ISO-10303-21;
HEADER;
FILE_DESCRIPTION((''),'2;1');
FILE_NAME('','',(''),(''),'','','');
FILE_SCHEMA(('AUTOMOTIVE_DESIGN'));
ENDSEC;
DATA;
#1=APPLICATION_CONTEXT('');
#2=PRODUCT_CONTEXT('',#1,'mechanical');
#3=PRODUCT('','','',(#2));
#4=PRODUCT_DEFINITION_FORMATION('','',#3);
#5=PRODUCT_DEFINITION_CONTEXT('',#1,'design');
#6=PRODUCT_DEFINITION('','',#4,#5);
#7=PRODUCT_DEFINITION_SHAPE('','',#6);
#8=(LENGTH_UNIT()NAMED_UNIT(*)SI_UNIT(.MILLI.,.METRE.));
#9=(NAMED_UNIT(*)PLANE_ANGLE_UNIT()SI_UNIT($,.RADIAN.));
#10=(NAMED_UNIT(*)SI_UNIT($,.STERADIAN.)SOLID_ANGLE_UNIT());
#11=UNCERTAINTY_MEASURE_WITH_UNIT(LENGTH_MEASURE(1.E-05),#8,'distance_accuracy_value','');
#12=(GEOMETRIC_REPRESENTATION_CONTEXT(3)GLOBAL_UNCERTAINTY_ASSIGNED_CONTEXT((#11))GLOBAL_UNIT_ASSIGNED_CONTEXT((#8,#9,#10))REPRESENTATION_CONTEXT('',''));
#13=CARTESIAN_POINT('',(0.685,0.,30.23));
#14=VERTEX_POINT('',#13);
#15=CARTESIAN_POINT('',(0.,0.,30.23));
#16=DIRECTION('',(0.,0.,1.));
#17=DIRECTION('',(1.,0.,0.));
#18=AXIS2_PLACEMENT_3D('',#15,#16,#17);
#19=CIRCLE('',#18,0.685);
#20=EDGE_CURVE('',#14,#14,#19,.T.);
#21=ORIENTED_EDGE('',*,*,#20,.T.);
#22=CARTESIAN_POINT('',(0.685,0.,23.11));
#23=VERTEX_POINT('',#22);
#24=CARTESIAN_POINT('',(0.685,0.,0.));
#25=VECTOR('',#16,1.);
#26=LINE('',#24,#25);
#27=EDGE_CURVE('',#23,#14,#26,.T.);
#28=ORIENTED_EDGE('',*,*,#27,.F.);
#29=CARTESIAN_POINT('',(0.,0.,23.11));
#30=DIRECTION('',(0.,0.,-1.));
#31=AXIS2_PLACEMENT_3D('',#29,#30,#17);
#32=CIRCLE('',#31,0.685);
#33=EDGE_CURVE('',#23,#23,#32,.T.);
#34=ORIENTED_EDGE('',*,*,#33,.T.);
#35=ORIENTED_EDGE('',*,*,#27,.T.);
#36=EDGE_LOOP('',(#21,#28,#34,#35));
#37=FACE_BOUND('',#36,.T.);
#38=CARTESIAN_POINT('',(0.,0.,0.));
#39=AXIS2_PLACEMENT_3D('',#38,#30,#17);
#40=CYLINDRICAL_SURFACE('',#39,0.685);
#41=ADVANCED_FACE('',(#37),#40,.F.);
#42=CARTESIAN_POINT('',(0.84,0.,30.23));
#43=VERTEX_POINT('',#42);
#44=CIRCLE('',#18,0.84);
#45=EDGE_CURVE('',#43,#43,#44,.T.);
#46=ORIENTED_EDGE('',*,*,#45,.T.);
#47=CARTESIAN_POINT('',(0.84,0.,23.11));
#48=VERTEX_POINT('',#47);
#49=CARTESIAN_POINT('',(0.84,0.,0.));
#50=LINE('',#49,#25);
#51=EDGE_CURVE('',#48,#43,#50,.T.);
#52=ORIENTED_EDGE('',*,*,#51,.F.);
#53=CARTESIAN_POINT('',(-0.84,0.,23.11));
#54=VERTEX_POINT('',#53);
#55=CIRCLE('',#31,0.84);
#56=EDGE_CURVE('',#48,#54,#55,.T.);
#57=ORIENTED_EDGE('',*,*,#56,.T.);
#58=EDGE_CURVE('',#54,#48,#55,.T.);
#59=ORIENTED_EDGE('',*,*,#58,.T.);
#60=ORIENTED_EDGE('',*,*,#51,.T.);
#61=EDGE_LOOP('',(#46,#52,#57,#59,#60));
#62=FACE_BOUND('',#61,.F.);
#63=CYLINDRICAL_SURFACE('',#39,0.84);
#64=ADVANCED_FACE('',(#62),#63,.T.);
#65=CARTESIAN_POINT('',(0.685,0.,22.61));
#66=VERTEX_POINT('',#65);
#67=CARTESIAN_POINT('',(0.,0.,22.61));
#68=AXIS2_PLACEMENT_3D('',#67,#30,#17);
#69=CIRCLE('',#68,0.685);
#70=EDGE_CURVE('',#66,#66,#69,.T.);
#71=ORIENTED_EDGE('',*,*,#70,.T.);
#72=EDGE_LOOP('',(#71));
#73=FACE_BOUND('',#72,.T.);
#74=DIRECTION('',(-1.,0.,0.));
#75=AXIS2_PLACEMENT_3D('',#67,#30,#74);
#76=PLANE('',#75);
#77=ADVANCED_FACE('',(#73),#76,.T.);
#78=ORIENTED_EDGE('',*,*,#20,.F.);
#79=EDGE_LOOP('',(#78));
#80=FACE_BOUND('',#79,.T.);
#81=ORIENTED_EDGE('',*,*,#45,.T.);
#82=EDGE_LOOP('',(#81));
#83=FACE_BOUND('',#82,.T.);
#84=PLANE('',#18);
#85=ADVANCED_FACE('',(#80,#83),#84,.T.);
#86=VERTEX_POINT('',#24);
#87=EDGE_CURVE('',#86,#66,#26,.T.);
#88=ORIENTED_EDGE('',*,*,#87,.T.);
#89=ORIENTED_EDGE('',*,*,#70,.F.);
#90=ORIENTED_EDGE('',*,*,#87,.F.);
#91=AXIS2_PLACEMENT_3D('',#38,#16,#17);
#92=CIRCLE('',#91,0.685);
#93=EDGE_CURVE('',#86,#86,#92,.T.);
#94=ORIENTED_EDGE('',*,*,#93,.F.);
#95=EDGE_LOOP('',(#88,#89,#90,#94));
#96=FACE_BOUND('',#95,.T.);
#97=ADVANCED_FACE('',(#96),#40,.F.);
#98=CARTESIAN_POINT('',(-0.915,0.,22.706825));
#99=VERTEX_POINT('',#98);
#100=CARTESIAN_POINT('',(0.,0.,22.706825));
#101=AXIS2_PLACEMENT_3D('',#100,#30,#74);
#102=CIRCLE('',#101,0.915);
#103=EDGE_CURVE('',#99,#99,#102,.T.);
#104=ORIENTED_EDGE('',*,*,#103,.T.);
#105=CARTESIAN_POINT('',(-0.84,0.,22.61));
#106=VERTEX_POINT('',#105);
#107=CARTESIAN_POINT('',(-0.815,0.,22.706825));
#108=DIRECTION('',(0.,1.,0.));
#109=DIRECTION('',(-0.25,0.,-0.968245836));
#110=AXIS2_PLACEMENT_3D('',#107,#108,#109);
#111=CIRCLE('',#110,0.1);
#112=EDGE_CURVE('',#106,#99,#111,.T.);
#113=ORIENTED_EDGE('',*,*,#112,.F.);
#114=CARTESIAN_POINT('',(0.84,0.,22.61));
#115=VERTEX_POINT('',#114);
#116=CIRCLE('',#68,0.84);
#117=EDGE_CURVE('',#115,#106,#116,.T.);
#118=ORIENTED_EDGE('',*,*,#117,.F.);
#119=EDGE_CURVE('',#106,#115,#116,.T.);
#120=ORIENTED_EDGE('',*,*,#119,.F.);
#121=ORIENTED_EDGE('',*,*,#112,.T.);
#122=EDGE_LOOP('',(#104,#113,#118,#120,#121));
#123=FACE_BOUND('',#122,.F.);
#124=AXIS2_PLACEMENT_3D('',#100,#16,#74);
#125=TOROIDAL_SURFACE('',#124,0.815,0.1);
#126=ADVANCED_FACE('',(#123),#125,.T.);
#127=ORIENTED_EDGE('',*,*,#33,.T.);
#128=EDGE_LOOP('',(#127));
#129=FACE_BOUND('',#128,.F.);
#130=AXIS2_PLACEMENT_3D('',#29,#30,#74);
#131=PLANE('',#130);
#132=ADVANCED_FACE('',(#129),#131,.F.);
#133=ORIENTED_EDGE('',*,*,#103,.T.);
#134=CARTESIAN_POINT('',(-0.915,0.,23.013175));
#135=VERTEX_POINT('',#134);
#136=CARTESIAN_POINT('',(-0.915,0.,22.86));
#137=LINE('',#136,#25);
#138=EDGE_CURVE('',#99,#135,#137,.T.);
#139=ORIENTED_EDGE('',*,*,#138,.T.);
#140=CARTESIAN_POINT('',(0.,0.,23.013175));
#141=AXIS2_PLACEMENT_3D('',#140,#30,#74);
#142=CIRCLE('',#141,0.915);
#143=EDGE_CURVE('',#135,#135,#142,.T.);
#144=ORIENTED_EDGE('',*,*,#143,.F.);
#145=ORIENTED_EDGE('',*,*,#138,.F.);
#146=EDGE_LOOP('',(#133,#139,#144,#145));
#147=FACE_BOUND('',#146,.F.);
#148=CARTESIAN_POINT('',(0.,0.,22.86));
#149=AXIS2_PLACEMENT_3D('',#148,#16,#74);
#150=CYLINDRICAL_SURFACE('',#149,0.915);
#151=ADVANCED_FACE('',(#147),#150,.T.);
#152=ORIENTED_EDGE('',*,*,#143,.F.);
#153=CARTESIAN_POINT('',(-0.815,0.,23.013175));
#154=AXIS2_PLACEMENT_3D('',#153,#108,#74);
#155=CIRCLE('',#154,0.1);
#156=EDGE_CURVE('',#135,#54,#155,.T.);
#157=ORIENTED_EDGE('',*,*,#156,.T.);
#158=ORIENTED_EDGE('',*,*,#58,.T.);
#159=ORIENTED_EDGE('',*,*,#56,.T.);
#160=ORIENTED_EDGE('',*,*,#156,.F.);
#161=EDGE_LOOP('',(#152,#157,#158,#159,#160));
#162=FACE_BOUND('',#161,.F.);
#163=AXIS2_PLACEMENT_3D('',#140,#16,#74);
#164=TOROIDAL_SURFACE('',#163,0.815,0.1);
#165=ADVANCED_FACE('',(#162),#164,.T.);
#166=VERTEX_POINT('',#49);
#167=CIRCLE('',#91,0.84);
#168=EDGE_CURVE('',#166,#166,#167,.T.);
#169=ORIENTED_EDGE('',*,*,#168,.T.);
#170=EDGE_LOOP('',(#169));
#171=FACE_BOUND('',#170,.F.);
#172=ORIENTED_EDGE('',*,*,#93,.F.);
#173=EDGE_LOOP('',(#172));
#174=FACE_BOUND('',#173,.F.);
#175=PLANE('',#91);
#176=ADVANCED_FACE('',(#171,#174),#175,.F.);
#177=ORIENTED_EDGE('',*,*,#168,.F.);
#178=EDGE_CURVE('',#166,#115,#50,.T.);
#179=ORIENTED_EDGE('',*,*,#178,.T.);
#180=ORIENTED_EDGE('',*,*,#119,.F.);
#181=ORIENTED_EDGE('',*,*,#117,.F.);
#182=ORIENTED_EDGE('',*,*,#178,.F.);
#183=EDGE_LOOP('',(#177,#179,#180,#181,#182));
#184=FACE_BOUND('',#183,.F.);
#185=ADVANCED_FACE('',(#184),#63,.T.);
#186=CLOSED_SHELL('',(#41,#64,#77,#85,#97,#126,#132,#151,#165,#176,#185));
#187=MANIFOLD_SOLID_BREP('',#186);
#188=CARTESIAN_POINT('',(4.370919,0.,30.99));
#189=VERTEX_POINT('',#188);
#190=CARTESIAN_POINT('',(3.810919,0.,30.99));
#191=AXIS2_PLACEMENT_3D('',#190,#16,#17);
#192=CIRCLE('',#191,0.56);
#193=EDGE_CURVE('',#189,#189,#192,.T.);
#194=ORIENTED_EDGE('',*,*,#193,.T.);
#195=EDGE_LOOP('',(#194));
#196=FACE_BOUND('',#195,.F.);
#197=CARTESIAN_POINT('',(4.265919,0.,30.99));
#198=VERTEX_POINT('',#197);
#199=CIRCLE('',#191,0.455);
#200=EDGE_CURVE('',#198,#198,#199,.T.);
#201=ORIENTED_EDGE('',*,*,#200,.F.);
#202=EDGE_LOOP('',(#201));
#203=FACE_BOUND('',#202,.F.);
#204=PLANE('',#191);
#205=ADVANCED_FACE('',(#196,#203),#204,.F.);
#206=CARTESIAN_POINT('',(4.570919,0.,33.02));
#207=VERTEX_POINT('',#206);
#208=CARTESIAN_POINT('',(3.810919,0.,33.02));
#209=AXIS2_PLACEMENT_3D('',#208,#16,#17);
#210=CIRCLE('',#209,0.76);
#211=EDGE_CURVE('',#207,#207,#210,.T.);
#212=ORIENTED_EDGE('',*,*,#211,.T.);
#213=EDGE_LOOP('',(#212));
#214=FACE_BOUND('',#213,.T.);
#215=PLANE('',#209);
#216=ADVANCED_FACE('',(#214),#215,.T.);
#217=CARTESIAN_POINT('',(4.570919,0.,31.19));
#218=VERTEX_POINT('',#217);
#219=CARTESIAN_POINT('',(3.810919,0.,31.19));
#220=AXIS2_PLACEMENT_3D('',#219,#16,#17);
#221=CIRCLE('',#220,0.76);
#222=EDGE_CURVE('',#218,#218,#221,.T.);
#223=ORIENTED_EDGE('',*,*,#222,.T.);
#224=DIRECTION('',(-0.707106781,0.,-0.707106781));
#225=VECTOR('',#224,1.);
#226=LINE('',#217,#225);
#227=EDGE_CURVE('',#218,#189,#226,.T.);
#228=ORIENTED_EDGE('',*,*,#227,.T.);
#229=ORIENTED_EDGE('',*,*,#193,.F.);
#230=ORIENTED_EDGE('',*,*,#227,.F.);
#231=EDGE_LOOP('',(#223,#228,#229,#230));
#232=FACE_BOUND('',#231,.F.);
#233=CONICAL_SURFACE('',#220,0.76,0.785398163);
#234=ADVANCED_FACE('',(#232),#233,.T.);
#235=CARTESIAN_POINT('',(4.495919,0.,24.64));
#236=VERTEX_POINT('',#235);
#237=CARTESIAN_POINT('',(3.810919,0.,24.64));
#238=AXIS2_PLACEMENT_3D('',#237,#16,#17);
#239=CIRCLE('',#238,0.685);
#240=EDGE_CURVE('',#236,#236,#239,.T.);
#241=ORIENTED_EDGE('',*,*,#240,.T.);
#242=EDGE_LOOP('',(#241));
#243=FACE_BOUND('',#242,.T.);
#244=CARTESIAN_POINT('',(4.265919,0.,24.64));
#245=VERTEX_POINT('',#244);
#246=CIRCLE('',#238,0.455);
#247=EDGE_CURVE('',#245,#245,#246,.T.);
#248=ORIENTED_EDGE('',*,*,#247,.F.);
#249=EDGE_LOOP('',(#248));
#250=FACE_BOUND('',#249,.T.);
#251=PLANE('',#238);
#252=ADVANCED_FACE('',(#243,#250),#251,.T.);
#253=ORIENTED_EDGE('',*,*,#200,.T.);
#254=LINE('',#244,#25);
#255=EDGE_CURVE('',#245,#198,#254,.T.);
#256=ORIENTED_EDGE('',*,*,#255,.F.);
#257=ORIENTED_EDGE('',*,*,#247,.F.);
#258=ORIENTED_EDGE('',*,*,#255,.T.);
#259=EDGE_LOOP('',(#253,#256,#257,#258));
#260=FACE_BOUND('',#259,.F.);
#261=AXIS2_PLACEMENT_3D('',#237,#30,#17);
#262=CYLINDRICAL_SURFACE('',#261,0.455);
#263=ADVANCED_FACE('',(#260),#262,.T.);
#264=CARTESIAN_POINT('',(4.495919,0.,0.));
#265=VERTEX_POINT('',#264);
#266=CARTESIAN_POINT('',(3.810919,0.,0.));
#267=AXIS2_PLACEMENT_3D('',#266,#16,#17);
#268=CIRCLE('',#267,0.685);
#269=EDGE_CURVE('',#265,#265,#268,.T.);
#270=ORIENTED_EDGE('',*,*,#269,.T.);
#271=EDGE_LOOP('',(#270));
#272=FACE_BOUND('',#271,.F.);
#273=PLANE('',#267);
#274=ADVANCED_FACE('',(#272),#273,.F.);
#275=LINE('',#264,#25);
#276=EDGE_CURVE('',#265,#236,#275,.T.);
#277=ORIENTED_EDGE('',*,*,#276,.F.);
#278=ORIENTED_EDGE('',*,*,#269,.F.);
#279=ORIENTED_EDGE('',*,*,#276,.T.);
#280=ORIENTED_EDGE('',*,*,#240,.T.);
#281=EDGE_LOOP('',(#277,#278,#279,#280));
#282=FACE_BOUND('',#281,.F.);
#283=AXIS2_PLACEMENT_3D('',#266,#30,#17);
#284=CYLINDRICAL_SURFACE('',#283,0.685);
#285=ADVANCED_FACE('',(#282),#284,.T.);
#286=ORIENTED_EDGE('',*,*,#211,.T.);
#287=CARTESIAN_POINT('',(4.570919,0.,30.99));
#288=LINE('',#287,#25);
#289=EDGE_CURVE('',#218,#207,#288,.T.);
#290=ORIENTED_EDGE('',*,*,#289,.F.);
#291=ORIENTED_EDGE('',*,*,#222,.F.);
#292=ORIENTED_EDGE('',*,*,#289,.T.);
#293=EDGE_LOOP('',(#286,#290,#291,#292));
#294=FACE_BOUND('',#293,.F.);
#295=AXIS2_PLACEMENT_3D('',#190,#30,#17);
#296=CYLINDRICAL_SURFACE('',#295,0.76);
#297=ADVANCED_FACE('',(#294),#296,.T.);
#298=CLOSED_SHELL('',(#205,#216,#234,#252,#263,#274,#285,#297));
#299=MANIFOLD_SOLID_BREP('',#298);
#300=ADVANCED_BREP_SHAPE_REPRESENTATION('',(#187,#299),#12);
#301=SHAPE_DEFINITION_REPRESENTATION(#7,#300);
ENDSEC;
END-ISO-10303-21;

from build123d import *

# Parameters (mm, degrees)
F0_R     = 0.84
F0_R_2   = 0.685
F1_DEPTH = 30.23
F2_R     = 0.685
F3_DEPTH = 24.64
F4_R     = 0.455
F5_DEPTH = 6.35
F6_R     = 0.76
F7_DEPTH = 2.03
F8_SIZE  = 0.2
F9_W     = 0.915
F9_H     = 0.5


# Not quite as in the source:
# - a fillet or chamfer that OpenCascade refuses, or shapes differently, is made with other operations: its cross-section is extruded or revolved along the edge and cut away or added


with BuildPart() as f1:
    # F0 (on Top) → F1 (new body)
    with BuildSketch(Plane.XY):
        Circle(F0_R)
        Circle(F0_R_2, mode=Mode.SUBTRACT)
    extrude(amount=F1_DEPTH)

    # F9 (on Front) → F10 (revolve)
    with BuildSketch(Plane.XZ):
        with Locations((-0.4575, 22.86)):
            Rectangle(F9_W, F9_H)
    revolve(axis=Axis((0, 0, 22.86), (0, 0, -1)))

    # F11: fillet of radius 0.1 on 2 edges, made by hand

    # F11_s1 → F11_t2 (revolve, cut)
    with BuildSketch(Plane.XZ):
        with BuildLine():
            ThreePointArc((-0.915, 23.0131754163), (-0.8940569415, 23.0744126599), (-0.84, 23.11))
            Line((-0.84, 23.11), (-0.915, 23.11))
            Line((-0.915, 23.11), (-0.915, 23.0131754163))
        make_face()
    revolve(axis=Axis((0, 0, 23.11), (0, 0, -1)), mode=Mode.SUBTRACT)

    # F11_s3 → F11_t4 (revolve, cut)
    with BuildSketch(Plane.XZ):
        with BuildLine():
            ThreePointArc((-0.84, 22.61), (-0.8940569415, 22.6455873401), (-0.915, 22.7068245837))
            Line((-0.915, 22.7068245837), (-0.915, 22.61))
            Line((-0.915, 22.61), (-0.84, 22.61))
        make_face()
    revolve(axis=Axis((0, 0, 22.61), (0, 0, -1)), mode=Mode.SUBTRACT)


with BuildPart() as f3:
    # F2 (on Top) → F3 (new body)
    with BuildSketch(Plane.XY):
        with Locations((3.8109193556, 0)):
            Circle(F2_R)
    extrude(amount=F3_DEPTH)

    # F4 (on face) → F5 (join)
    with BuildSketch(Plane.XY.offset(24.64)):
        with Locations((3.8109193556, 0)):
            Circle(F4_R)
    extrude(amount=F5_DEPTH)

    # F6 (on face) → F7 (join)
    with BuildSketch(Plane.XY.offset(30.99)):
        with Locations((3.8109193556, 0)):
            Circle(F6_R)
    extrude(amount=F7_DEPTH)

    # F8
    f8_edges = [f3.edges().sort_by_distance(p)[0] for p in [
        (3.050919, 0, 30.99),
    ]]
    chamfer(f8_edges, length=F8_SIZE)


solid = Compound([f1.part, f3.part])
